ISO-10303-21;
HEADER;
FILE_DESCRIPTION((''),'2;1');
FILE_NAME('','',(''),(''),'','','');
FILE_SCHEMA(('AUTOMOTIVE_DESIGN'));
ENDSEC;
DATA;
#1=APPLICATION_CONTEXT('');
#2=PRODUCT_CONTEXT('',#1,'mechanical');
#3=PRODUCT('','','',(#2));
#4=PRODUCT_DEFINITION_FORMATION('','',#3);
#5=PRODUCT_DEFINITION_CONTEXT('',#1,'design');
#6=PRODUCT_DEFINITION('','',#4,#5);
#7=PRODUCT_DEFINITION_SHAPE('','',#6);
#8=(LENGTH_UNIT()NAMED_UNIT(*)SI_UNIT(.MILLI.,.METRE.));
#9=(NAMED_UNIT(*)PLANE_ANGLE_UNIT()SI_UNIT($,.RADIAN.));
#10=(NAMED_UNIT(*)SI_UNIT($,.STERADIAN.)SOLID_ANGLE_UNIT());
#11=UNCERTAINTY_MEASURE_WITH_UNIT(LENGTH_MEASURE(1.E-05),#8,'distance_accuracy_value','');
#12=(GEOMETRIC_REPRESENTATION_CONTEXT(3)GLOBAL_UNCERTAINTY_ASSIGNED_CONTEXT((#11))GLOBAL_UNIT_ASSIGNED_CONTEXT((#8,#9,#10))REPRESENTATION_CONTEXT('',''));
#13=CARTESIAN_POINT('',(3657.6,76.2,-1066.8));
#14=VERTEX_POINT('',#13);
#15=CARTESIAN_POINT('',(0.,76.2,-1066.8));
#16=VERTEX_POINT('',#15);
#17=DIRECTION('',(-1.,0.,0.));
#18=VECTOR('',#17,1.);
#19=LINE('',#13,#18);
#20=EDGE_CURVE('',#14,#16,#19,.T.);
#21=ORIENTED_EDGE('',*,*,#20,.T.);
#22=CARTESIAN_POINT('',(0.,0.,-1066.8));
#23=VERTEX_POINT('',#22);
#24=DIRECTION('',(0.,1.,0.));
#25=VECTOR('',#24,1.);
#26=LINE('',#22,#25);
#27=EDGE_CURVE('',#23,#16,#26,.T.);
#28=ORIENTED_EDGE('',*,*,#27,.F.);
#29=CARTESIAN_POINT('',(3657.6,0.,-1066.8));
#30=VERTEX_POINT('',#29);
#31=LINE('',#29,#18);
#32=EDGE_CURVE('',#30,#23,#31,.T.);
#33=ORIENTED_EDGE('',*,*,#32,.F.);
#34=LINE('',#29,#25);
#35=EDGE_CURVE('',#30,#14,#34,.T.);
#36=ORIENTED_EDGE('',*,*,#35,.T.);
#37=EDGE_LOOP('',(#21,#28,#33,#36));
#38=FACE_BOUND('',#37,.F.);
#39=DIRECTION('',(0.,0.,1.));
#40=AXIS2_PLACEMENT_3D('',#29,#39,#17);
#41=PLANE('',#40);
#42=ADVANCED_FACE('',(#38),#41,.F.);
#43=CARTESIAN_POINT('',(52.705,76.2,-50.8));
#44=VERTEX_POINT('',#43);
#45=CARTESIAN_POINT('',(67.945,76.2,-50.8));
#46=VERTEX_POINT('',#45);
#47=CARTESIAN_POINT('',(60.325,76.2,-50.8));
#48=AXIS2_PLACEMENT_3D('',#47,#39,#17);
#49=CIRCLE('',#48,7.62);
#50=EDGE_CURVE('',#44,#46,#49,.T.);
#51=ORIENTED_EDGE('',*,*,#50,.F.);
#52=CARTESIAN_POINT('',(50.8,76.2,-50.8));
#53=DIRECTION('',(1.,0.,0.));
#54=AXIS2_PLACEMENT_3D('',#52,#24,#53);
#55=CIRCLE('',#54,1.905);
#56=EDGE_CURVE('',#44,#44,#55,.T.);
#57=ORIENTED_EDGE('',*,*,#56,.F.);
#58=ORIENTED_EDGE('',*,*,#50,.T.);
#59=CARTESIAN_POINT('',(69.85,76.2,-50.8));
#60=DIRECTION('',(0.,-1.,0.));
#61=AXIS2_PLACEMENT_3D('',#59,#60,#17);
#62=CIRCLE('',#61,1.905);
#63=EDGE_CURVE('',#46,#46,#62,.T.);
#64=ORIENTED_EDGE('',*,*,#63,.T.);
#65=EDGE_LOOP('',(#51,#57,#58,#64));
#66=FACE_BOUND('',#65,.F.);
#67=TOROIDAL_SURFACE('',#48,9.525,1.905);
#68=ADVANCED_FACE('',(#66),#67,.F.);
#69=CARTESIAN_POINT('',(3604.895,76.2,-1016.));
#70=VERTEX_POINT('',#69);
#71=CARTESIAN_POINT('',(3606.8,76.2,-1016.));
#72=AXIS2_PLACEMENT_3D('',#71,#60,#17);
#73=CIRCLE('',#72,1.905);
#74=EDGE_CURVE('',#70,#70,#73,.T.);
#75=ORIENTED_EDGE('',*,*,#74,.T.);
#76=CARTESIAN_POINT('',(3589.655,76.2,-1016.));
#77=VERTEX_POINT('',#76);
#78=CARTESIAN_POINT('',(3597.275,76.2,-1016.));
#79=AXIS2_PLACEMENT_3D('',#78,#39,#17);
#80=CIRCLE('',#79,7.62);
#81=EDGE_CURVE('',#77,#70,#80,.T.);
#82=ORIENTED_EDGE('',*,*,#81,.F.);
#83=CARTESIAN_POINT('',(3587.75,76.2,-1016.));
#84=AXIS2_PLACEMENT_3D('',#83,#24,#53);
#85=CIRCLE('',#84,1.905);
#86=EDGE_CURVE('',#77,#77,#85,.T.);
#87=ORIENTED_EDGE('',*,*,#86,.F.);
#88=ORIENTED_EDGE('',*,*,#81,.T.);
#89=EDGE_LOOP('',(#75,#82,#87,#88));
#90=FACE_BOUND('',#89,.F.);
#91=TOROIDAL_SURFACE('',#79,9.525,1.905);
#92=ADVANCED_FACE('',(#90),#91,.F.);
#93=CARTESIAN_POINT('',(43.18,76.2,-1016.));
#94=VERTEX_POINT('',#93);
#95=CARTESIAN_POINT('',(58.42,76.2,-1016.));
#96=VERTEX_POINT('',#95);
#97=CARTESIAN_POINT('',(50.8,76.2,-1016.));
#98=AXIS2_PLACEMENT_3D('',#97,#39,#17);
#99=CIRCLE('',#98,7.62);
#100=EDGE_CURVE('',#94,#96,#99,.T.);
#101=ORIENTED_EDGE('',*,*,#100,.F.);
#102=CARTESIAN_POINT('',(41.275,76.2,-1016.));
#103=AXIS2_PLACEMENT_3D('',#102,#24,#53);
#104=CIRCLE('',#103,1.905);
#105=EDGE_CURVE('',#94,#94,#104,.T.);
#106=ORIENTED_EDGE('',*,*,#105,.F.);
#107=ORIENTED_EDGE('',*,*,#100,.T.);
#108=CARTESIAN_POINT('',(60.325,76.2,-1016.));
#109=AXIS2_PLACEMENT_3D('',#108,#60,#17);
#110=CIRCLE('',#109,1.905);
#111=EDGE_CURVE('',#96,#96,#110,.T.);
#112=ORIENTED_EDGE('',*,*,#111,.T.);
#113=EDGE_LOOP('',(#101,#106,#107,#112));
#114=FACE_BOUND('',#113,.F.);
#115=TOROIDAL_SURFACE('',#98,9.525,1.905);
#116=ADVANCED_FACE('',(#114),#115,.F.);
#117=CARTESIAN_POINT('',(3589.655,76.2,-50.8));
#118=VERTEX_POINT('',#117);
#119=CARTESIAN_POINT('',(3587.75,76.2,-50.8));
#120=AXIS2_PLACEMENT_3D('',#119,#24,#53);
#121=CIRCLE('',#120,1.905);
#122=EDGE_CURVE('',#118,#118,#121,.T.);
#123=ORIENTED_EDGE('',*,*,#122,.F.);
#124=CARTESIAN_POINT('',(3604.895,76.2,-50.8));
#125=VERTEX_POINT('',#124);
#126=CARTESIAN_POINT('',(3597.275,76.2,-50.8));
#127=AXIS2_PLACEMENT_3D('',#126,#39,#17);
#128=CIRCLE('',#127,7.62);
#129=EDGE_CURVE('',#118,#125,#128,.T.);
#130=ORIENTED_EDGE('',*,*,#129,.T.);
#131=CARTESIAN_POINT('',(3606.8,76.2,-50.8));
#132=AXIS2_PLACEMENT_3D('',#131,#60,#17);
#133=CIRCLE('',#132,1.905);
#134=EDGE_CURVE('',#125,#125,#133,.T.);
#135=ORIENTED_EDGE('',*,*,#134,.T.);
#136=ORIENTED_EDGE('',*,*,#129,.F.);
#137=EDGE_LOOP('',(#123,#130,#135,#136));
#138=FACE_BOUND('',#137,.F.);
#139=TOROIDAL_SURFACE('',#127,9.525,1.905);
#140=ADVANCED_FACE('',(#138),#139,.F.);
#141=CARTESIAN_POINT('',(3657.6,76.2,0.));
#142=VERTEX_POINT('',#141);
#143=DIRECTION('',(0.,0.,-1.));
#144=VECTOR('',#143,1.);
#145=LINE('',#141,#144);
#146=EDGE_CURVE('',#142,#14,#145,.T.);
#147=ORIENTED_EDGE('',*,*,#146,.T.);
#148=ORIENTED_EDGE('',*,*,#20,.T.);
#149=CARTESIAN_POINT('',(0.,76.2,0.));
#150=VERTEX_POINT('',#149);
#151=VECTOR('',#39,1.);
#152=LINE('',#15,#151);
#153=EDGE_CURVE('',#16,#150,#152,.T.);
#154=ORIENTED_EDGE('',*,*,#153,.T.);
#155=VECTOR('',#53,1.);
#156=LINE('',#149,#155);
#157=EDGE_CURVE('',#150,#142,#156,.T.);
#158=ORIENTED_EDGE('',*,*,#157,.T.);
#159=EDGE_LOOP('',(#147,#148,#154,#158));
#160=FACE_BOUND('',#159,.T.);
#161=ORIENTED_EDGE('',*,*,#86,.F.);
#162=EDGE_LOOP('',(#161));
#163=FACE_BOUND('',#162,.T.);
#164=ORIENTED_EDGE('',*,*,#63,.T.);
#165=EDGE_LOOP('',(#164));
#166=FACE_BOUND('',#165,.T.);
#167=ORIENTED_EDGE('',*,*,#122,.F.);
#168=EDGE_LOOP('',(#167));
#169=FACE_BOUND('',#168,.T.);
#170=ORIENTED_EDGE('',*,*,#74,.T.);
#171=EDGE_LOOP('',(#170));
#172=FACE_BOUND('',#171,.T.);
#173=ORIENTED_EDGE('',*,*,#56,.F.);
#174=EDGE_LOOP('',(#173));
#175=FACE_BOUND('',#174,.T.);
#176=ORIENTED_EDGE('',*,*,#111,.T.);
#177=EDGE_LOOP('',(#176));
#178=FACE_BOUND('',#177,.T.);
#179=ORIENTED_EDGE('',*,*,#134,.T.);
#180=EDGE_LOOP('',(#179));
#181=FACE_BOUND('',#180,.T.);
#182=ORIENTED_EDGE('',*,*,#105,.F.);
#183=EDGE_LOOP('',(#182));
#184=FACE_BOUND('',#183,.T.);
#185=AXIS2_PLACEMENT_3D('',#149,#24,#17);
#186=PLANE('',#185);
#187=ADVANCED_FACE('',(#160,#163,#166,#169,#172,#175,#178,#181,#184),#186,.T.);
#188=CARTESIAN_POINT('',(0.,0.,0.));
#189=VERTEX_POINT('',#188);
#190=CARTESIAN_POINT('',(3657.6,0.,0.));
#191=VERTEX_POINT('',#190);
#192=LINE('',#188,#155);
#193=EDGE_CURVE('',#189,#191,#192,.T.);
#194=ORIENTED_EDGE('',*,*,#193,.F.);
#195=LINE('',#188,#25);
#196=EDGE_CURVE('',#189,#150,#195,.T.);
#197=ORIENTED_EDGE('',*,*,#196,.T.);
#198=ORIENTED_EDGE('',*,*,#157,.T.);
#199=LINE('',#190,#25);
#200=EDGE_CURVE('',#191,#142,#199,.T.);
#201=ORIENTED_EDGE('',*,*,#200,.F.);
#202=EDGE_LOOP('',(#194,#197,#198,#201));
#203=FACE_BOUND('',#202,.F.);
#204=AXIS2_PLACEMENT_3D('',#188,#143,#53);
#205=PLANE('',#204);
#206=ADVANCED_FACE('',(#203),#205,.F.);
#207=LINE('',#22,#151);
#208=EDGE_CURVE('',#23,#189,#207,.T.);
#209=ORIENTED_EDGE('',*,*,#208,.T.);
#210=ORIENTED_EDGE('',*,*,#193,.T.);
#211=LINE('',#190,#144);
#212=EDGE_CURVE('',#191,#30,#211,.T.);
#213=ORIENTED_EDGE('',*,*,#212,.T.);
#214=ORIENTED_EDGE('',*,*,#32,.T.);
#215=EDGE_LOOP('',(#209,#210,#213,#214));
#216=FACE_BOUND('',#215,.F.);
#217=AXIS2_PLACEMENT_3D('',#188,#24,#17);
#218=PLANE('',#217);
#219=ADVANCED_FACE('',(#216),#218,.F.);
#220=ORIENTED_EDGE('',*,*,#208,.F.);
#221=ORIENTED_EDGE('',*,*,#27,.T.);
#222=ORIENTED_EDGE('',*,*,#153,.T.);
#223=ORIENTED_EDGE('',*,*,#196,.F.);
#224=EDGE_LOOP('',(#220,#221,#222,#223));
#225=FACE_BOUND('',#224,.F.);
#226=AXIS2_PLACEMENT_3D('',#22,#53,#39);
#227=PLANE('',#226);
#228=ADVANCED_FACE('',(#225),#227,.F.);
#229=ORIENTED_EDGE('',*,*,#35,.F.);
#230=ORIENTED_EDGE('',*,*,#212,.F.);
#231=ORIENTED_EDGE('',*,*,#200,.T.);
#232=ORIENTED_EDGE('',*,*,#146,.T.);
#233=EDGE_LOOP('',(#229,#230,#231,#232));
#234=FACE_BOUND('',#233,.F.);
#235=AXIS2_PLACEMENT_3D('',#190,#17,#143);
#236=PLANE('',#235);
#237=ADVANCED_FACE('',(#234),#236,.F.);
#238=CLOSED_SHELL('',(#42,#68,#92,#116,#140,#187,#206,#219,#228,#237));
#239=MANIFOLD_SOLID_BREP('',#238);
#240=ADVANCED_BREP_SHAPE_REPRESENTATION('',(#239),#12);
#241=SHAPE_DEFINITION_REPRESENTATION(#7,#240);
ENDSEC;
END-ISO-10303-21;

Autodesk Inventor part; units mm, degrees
ref_plane "YZ Plane" through (0, 0, 0) normal (1, 0, 0) x (0, 1, 0)
ref_plane "XZ Plane" through (0, 0, 0) normal (0, 1, 0) x (-1, 0, 0)
ref_plane "XY Plane" through (0, 0, 0) normal (0, 0, 1) x (1, 0, 0)
sketch "Sketch1" plane through (0, 0, 0) normal (0, 1, 0) x (-1, 0, 0)
  line L0 (0, 0) -> (-3657.6, 0)
  line L1 (-3657.6, 0) -> (-3657.6, -1066.8)
  line L2 (-3657.6, -1066.8) -> (0, -1066.8)
  line L3 (0, -1066.8) -> (0, 0)
  dimension "d0" = 3657.6
  dimension "d1" = 1066.8
extrude "Extrusion1" add sketch "Sketch1" along normal blind 76.2
sketch "Sketch2" plane through (0, 76.2, 0) normal (0, 1, 0) x (1, 0, 0)
  circle A0 centre (50.8, 50.8) radius 1.905
  line L0 (0, 0) -> (3657.6, 0) projected
  line L1 (0, 1066.8) -> (0, 0) projected
  line L2 (60.325, 63.6506) -> (60.325, 37.6088) construction
  dimension "d4" = 3.81
  dimension "d5" = 50.8
  dimension "d6" = 50.8
  dimension "d7" = 9.525
revolve "Revolution1" cut sketch "Sketch2" angle 180 about axis through (60.325, 76.2, -63.6506) along (0, 0, 1)
sketch "Sketch3" plane through (0, 76.2, 0) normal (0, 1, 0) x (1, 0, 0)
  circle A0 centre (50.8, 50.8) radius 1.905 projected
  line L0 (50.8, 50.8) -> (3597.275, 50.8) construction
  line L1 (3597.275, 50.8) -> (3597.275, 1016) construction
  line L2 (3597.275, 1016) -> (50.8, 1016) construction
  line L3 (50.8, 1016) -> (50.8, 50.8) construction
  line L4 (3657.6, 1066.8) -> (0, 1066.8) projected
  line L5 (3657.6, 0) -> (3657.6, 1066.8) projected
  point P0 (0, 0)
  dimension "d9" = 50.8
  dimension "d10" = 60.325
pattern_sketch "Sketch Driven Pattern1" of "Revolution1" from (60.325, 76.2, -50.8) copies at (50.8, 76.2, -1016) at (3597.275, 76.2, -1016) at (3597.275, 76.2, -50.8)
properties part number "Hanging Platform" material "Rubber, Silicone"
